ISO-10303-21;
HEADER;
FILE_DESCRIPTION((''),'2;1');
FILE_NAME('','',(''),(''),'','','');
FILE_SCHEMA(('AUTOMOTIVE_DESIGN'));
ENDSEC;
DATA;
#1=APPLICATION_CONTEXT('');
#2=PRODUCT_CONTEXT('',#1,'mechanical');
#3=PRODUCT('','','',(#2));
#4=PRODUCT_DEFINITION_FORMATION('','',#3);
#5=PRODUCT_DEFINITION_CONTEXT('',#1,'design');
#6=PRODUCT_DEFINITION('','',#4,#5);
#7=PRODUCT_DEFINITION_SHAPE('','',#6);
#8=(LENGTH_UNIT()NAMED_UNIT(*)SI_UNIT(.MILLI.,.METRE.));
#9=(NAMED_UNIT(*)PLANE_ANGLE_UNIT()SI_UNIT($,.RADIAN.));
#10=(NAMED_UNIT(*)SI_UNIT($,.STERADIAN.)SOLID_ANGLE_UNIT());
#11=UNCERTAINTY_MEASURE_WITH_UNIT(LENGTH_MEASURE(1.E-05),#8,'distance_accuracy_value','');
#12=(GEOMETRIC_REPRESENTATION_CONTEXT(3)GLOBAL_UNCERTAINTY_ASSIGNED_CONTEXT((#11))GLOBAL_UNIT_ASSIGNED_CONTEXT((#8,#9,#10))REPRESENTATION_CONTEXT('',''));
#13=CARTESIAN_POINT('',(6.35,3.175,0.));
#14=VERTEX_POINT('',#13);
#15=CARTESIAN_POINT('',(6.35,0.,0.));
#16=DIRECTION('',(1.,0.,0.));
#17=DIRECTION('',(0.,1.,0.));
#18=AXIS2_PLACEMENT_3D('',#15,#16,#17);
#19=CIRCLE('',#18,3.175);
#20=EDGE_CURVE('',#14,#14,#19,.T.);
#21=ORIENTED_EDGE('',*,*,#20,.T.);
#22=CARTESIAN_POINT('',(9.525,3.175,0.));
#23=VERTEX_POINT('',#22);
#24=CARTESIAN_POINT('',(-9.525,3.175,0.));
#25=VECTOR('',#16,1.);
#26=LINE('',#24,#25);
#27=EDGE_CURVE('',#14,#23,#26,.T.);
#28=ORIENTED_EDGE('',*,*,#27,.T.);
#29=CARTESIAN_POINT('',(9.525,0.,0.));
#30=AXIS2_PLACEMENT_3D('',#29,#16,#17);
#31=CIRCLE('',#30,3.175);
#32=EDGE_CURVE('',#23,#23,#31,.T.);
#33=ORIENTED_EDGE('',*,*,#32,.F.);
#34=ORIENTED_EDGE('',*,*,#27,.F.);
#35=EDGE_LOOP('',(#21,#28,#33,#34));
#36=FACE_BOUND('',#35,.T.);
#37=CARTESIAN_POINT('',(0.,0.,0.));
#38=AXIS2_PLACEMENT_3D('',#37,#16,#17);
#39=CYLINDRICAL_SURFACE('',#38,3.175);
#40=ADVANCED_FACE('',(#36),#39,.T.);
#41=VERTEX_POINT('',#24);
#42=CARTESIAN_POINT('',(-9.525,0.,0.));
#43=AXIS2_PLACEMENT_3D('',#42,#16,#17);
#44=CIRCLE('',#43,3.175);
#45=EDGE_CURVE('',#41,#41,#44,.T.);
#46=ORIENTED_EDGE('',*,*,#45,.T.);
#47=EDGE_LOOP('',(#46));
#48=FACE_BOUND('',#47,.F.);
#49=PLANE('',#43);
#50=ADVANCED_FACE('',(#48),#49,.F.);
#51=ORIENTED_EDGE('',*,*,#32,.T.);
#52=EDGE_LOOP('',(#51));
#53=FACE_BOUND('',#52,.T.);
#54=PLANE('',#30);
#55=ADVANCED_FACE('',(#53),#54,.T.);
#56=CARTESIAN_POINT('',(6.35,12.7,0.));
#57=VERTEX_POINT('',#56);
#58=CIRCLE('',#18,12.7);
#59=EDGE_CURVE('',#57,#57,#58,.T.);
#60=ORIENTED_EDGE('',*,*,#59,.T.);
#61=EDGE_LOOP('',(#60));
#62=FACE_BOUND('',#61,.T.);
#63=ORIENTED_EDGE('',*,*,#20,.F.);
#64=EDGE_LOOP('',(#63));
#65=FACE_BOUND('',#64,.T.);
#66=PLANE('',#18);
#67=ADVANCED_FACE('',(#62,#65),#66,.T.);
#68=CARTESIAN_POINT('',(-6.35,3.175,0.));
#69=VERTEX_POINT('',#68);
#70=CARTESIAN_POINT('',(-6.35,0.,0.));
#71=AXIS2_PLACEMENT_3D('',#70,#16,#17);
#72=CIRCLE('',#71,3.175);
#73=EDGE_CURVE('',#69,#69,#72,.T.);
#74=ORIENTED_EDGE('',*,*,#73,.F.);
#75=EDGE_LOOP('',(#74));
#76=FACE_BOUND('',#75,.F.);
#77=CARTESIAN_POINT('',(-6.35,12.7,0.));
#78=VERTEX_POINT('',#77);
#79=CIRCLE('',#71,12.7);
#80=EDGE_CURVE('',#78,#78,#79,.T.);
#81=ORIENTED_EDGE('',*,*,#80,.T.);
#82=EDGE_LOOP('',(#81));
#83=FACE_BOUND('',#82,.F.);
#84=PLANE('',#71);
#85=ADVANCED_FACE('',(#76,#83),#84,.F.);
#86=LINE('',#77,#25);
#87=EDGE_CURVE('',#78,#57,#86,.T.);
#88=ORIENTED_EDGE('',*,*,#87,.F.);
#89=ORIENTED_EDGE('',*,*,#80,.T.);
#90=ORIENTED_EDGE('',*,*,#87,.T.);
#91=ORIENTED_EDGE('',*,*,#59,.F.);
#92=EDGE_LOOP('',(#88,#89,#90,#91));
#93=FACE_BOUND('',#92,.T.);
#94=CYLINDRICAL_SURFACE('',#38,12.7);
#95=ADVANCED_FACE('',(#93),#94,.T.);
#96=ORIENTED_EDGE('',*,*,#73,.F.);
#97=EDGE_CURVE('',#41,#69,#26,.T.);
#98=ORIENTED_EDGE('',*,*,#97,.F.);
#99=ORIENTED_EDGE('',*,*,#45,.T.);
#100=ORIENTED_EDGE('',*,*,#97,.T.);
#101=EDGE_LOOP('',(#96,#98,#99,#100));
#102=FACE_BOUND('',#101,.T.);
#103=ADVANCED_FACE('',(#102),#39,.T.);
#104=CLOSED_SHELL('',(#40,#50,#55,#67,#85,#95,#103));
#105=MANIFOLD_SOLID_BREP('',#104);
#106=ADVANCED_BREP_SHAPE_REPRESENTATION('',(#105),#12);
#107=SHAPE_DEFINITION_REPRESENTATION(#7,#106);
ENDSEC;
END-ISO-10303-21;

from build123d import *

# Parameters (mm, degrees)
F0_R     = 3.175
F1_DEPTH = 9.525
F0_R_2   = 12.7
F2_DEPTH = 6.35


# Not quite as in the source:
# - a feature of the source that left no trace in its solid (it failed there, or was rolled back) is left out


with BuildPart() as f1:
    # F0 (on Right) → F1 (new body, symmetric)
    with BuildSketch(Plane.YZ):
        Circle(F0_R)
    extrude(amount=F1_DEPTH, both=True)

    # F0 (on Right) → F2 (join, symmetric)
    with BuildSketch(Plane.YZ):
        Circle(F0_R_2)
        Circle(F0_R, mode=Mode.SUBTRACT)
    extrude(amount=F2_DEPTH, both=True)


solid = f1.part
